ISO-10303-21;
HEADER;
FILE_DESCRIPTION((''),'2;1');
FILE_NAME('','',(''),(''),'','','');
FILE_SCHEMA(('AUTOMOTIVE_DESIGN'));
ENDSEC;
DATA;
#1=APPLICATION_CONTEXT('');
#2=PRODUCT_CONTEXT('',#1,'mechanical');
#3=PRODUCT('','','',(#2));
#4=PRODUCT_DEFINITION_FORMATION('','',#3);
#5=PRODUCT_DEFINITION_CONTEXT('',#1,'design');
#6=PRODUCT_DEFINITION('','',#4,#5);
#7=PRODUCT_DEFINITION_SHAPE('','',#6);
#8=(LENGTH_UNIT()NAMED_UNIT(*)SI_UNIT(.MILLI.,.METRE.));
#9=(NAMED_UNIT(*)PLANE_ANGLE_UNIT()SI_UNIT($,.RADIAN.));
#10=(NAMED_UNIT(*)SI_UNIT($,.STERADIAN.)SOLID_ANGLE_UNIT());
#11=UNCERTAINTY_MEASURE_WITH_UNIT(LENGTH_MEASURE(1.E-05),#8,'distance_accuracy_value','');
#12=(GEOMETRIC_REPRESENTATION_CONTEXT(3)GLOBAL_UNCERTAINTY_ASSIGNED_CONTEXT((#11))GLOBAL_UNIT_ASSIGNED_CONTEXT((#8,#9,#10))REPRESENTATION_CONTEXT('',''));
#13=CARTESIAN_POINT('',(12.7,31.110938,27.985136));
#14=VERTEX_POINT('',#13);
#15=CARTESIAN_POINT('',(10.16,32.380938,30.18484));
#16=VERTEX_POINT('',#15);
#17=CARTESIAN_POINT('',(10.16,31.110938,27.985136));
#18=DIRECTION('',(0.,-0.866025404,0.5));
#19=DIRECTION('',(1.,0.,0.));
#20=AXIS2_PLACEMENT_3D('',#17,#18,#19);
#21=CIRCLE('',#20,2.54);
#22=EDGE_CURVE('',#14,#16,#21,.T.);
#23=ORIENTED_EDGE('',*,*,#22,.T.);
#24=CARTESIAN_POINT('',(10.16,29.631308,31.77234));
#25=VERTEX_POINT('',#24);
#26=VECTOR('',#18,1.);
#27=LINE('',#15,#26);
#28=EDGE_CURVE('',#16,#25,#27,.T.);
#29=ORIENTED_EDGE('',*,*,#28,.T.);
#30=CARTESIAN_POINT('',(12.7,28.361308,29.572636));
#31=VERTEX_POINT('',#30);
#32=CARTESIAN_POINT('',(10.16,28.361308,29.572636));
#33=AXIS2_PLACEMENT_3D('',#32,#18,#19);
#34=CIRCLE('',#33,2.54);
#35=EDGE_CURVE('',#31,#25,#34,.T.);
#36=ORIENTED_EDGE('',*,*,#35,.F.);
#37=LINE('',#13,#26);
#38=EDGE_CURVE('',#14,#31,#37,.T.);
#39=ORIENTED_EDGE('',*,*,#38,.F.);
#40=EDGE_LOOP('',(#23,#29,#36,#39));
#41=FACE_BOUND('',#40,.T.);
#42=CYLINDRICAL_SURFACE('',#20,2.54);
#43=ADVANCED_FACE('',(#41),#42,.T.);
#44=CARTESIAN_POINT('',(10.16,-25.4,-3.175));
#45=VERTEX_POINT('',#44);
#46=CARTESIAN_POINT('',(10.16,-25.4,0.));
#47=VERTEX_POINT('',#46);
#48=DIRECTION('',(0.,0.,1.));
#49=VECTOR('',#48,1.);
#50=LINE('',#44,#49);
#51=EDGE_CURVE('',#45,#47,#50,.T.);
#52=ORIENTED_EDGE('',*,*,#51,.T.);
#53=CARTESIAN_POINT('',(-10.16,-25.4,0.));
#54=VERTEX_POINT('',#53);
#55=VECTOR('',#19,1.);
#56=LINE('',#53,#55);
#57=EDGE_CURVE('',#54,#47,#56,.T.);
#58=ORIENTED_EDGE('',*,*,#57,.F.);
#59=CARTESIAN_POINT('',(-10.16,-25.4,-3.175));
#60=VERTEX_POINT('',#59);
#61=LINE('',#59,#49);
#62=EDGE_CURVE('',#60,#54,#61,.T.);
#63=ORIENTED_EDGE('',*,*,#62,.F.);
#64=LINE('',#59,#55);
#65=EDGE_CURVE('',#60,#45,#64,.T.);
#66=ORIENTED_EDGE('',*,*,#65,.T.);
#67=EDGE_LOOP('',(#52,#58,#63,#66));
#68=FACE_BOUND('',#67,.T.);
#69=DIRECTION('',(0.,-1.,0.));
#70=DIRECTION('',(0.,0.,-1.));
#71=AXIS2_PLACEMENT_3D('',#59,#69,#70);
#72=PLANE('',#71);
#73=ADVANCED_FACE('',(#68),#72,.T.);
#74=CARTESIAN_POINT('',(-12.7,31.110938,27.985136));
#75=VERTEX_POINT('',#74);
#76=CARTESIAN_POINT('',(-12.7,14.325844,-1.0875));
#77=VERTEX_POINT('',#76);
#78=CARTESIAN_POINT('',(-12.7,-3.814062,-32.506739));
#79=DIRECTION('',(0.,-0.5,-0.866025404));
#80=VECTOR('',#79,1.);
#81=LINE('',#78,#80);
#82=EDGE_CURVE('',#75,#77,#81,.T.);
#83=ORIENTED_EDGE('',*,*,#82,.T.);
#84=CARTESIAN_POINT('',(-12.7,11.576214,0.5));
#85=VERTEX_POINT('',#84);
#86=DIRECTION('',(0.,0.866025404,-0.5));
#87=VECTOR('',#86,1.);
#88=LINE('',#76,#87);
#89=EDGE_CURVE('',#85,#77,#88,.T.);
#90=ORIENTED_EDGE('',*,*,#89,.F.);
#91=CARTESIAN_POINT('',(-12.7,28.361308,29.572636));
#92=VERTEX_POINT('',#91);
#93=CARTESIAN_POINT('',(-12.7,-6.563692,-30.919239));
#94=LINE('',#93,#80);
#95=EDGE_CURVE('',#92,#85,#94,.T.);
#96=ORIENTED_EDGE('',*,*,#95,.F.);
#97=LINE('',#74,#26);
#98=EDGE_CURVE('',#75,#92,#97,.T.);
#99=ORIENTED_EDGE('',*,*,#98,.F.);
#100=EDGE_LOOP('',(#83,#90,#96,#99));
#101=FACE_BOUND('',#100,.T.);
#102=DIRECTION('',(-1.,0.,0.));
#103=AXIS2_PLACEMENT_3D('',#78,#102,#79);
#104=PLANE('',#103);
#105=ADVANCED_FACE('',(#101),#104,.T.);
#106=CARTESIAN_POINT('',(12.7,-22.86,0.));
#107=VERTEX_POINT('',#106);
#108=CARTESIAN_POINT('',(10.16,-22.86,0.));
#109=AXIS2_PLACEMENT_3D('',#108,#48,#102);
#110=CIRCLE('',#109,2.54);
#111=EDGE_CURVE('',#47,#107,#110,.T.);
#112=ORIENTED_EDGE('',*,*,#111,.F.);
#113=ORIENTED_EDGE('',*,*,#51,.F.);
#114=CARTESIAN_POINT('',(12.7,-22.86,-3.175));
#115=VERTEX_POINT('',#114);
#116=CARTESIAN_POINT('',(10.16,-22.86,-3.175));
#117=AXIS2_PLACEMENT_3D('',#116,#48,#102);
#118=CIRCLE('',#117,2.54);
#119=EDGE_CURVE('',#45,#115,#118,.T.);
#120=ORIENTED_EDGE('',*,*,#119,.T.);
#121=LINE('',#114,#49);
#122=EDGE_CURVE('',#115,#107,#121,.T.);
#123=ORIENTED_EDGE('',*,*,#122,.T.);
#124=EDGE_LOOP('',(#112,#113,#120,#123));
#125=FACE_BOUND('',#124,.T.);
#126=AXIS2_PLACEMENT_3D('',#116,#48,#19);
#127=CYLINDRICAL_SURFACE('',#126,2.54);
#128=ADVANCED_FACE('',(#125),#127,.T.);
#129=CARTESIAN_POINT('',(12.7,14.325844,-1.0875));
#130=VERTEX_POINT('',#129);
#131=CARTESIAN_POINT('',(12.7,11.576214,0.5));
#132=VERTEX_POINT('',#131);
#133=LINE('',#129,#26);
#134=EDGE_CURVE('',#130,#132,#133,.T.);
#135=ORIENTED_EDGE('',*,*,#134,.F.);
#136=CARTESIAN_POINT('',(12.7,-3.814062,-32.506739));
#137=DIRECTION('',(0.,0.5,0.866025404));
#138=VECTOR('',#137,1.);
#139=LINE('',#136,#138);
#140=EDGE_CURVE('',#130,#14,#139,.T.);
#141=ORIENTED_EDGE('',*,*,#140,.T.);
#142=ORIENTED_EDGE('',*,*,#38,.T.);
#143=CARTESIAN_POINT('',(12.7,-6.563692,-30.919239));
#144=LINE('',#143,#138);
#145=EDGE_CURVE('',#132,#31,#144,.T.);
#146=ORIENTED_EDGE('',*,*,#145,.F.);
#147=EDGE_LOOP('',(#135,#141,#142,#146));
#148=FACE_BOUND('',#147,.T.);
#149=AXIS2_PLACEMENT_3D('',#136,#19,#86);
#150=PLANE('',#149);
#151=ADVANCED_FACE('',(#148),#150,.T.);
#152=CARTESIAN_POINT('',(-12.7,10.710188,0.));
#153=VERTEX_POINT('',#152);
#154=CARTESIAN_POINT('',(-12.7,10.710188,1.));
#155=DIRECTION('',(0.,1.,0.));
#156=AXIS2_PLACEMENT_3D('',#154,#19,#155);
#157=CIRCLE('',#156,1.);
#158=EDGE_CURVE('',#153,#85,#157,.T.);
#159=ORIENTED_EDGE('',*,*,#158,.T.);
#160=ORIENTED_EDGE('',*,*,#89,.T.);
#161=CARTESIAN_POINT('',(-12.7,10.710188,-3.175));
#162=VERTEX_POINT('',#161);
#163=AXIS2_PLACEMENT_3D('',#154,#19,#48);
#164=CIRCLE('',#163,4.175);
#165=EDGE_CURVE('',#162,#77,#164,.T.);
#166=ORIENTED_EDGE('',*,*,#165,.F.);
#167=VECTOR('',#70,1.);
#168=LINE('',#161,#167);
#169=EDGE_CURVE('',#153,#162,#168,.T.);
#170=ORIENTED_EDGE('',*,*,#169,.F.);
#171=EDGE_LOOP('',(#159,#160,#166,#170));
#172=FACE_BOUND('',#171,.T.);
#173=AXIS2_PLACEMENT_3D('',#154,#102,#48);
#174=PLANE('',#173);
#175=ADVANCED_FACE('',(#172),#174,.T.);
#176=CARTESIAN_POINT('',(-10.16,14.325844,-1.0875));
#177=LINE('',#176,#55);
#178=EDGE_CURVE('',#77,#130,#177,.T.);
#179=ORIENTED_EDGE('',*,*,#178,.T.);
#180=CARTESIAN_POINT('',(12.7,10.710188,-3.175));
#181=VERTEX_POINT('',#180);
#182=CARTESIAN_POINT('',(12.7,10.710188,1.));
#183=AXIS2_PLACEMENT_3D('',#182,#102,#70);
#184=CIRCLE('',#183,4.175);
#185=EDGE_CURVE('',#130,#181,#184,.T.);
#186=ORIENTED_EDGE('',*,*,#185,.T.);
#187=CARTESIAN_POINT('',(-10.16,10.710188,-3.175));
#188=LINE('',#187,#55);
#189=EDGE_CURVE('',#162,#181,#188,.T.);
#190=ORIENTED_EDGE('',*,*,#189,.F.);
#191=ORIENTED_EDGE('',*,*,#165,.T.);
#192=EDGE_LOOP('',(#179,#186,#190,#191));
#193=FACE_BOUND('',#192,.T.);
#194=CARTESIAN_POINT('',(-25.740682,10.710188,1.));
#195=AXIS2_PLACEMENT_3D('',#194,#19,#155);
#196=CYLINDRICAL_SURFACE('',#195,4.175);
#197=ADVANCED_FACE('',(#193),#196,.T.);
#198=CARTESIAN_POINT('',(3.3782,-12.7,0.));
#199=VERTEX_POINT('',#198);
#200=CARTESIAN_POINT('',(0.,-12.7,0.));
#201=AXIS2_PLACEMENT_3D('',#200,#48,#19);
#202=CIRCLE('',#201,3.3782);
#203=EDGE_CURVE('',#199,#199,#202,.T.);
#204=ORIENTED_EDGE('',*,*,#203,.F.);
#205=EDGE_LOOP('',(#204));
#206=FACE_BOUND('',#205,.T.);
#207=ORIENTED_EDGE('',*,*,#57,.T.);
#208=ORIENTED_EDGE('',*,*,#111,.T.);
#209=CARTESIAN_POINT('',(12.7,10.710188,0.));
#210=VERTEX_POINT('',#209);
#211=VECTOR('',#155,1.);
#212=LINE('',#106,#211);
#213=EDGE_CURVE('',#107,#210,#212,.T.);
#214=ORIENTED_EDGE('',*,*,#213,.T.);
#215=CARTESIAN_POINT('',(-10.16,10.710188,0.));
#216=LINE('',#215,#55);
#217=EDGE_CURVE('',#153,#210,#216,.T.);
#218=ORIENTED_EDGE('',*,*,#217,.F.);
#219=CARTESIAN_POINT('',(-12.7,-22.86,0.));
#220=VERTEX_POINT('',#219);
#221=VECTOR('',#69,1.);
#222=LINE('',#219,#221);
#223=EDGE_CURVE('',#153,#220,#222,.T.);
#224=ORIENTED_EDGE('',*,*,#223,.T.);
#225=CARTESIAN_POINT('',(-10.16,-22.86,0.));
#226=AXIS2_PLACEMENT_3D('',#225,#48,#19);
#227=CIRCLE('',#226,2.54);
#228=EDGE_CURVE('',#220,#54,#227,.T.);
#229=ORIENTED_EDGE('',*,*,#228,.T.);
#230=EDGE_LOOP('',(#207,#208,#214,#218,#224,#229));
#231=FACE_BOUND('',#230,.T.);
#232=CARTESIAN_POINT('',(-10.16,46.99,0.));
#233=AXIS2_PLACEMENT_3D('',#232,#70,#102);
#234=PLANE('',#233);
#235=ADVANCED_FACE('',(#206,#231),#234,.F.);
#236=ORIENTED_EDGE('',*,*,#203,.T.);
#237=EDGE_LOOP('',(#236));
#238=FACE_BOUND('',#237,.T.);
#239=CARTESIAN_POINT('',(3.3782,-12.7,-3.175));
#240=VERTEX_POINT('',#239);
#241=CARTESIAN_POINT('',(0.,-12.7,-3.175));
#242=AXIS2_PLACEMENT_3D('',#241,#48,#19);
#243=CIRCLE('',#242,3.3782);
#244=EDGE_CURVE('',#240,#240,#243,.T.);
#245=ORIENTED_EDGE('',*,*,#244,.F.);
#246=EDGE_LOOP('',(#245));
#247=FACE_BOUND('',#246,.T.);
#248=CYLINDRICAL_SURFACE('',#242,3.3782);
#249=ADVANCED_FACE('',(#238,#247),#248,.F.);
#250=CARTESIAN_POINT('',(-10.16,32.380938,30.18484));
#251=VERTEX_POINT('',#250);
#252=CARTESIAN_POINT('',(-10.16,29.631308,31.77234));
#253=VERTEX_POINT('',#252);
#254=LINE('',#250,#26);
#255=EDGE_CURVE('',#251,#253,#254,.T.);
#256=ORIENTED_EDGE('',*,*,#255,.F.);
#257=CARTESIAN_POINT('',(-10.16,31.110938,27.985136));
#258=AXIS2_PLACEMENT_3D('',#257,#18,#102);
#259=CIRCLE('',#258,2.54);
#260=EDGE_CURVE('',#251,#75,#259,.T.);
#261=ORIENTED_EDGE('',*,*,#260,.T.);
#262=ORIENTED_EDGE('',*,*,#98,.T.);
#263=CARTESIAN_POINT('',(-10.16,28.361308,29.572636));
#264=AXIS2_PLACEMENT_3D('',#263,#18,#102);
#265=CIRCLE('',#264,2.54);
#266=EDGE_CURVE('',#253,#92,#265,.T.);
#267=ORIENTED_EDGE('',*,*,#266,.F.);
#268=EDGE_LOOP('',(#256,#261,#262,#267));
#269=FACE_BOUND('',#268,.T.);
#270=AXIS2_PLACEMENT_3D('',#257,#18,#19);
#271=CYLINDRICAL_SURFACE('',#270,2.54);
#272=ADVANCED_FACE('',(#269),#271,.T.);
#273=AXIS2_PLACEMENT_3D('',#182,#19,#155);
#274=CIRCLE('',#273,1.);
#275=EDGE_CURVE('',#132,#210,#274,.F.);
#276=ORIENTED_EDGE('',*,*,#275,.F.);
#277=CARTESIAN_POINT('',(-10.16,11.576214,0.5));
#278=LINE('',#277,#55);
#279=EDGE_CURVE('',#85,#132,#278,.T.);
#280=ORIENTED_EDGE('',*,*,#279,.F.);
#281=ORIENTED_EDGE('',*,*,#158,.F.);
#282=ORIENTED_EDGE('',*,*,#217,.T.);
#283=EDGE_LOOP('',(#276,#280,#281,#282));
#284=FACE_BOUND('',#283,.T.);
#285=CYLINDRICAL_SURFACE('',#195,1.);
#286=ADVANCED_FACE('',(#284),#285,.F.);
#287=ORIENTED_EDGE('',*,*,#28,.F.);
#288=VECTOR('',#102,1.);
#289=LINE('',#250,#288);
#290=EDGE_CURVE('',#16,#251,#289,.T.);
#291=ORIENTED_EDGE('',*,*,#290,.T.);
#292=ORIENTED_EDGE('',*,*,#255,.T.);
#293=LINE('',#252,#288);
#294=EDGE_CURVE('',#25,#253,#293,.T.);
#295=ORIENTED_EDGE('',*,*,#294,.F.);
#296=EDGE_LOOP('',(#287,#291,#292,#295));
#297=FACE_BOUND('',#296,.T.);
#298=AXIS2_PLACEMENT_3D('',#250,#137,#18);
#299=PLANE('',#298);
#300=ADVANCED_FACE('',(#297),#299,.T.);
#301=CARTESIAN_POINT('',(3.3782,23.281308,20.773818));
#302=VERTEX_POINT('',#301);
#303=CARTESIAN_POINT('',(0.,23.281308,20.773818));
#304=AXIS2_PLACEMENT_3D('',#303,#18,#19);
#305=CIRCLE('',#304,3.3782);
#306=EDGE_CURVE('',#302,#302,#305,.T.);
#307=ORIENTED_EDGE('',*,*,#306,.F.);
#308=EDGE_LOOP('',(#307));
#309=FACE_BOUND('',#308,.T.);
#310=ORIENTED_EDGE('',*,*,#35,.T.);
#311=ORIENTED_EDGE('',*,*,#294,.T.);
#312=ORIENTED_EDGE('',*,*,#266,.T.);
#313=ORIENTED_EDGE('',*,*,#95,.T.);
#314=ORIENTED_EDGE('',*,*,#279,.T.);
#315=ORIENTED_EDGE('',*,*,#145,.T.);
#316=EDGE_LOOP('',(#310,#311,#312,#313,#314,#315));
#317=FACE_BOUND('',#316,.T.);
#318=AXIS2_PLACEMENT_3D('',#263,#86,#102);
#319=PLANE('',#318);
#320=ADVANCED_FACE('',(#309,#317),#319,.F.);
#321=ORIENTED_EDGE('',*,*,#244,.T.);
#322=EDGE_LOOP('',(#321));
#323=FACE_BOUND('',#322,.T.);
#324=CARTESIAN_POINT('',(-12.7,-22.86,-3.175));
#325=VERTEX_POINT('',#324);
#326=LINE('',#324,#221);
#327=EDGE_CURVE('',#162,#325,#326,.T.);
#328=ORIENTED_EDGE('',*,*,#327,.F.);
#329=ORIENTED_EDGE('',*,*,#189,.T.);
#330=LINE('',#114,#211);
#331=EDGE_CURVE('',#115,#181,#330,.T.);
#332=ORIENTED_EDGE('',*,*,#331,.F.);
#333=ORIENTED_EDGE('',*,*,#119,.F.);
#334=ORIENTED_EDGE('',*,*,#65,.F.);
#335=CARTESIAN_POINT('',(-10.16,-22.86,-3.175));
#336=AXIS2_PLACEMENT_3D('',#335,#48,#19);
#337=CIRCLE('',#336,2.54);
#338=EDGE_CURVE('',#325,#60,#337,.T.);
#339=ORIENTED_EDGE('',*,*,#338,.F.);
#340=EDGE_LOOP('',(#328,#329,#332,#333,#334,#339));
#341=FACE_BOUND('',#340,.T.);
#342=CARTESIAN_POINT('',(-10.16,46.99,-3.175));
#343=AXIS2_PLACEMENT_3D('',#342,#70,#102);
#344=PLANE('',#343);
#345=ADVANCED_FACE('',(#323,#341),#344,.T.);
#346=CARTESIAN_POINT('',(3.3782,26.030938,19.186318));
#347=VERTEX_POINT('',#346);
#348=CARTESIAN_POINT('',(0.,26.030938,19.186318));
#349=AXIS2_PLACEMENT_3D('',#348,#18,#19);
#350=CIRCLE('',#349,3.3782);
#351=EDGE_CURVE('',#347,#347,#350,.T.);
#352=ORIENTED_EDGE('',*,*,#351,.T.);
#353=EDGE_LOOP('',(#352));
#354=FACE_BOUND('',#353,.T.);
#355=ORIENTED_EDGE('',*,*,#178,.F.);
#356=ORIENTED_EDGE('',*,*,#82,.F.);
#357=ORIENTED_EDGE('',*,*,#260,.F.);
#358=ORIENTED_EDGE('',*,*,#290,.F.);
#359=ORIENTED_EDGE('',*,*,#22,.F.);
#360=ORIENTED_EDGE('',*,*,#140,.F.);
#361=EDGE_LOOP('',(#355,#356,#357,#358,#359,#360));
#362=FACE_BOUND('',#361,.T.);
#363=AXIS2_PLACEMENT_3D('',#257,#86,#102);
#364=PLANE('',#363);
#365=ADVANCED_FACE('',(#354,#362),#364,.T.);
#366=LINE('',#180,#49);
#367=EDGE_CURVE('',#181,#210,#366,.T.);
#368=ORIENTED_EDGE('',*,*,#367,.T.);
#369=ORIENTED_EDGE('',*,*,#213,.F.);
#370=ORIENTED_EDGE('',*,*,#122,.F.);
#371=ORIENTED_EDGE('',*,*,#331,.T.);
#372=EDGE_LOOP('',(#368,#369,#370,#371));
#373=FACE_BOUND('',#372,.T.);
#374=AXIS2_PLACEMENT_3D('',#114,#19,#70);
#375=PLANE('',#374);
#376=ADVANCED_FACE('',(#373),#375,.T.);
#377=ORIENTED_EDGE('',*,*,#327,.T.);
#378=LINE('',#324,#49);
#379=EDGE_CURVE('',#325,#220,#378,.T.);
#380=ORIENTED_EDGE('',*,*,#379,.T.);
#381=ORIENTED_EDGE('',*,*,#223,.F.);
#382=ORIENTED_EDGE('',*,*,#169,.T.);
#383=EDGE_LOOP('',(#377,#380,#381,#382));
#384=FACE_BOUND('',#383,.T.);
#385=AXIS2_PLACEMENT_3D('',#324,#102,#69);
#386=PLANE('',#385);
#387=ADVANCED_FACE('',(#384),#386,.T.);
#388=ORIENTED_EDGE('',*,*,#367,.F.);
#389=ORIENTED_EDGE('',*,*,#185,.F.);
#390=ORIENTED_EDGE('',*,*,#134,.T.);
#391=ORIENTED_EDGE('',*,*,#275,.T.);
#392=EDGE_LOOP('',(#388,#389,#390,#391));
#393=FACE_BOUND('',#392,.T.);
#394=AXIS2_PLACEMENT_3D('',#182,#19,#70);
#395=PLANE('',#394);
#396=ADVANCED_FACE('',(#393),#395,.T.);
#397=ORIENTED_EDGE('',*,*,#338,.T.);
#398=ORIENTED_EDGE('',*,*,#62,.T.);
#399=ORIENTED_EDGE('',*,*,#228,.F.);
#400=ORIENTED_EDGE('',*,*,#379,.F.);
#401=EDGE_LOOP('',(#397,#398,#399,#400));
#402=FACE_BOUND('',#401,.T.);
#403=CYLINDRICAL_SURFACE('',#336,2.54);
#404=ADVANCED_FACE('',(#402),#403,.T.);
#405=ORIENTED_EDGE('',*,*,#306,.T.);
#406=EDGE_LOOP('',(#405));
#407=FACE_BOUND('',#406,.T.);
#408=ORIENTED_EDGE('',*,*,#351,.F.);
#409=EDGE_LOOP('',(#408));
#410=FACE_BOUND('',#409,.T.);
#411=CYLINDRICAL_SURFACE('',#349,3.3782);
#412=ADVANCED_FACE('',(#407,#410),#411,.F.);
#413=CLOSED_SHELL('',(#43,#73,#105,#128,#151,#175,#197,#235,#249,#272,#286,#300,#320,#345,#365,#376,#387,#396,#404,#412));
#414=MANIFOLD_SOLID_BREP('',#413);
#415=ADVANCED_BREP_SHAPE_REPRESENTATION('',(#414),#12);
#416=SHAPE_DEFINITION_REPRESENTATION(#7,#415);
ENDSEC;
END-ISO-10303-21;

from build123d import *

# Parameters (mm, degrees)
SKETCH1_R                  = 3.3782
BASE_FLANGE1_DEPTH         = 3.175
SKETCHED_START             = -12.7
SKETCHED_BEND1_DEPTH       = 25.4
SKETCHED_START_2           = -10.229596
SKETCHED_BEND1_2_DEPTH     = 6.8513959
SKETCHED_START_3           = 3.3782001
SKETCHED_BEND1_3_DEPTH     = 6.7817999
SKETCHED_BEND1_4_DEPTH     = 25.4
SKETCHED_START_4           = 9.775295033
SKETCHED_BEND1_5_OUTLINE_R = 3.3782
SKETCHED_BEND1_5_DEPTH     = 3.175


with BuildPart() as part:
    # Base-Flange1: sheet metal written as solids
    # Sketch1 → Base-Flange1 (new body)
    with BuildSketch(Plane.XY):
        with BuildLine():
            Line((-10.16, -25.4), (10.16, -25.4))
            ThreePointArc((10.16, -25.4), (11.956051224, -24.656051224), (12.7, -22.86))
            Line((12.7, -22.86), (12.7, 46.99))
            ThreePointArc((12.7, 46.99), (11.956051224, 48.786051224), (10.16, 49.53))
            Line((10.16, 49.53), (-10.16, 49.53))
            ThreePointArc((-10.16, 49.53), (-11.956051224, 48.786051224), (-12.7, 46.99))
            Line((-12.7, 46.99), (-12.7, -22.86))
            ThreePointArc((-12.7, -22.86), (-11.956051224, -24.656051224), (-10.16, -25.4))
        make_face()
        with Locations((0, 36.83)):
            Circle(SKETCH1_R, mode=Mode.SUBTRACT)
        with Locations((0, -12.7)):
            Circle(SKETCH1_R, mode=Mode.SUBTRACT)
    extrude(amount=-BASE_FLANGE1_DEPTH)

    # Sketched Bend1: read off the stored shape, not the designer's step
    # Sketched Bend1 outline → Sketched Bend1 (cut)
    with BuildSketch(Plane.YZ.offset(SKETCHED_START)):
        with BuildLine():
            Line((49.53, 0), (14.953712647, 0))
            Line((14.953712647, 0), (14.325844229, -1.0875))
            ThreePointArc((14.325844229, -1.0875), (12.797688168, -2.615656061), (10.710188168, -3.175))
            Line((10.710188168, -3.175), (49.53, -3.175))
            Line((49.53, -3.175), (49.53, 0))
        make_face()
    extrude(amount=SKETCHED_BEND1_DEPTH, mode=Mode.SUBTRACT)

    # Sketched Bend1 2 outline → Sketched Bend1 2 (add)
    with BuildSketch(Plane.YZ.offset(SKETCHED_START_2)):
        with BuildLine():
            Line((29.631307656, 31.772340289), (11.576213572, 0.5))
            ThreePointArc((11.576213572, 0.5), (11.210188168, 0.133974596), (10.710188168, 0))
            Line((10.710188168, 0), (14.953712647, 0))
            Line((14.953712647, 0), (32.380938313, 30.184840289))
            Line((32.380938313, 30.184840289), (29.631307656, 31.772340289))
        make_face()
    extrude(amount=SKETCHED_BEND1_2_DEPTH)

    # Sketched Bend1 3 outline → Sketched Bend1 3 (add)
    with BuildSketch(Plane.YZ.offset(SKETCHED_START_3)):
        with BuildLine():
            Line((29.631307656, 31.772340289), (11.576213572, 0.5))
            ThreePointArc((11.576213572, 0.5), (11.210188168, 0.133974596), (10.710188168, 0))
            Line((10.710188168, 0), (14.953712647, 0))
            Line((14.953712647, 0), (32.380938313, 30.184840289))
            Line((32.380938313, 30.184840289), (29.631307656, 31.772340289))
        make_face()
    extrude(amount=SKETCHED_BEND1_3_DEPTH)

    # Sketched Bend1 4 outline → Sketched Bend1 4 (add)
    with BuildSketch(Plane.YZ.offset(SKETCHED_START)):
        with BuildLine():
            Line((29.631307656, 31.772340289), (11.576213572, 0.5))
            ThreePointArc((11.576213572, 0.5), (11.210188168, 0.133974596), (10.710188168, 0))
            Line((10.710188168, 0), (14.953712647, 0))
            Line((14.953712647, 0), (32.380938313, 30.184840289))
            Line((32.380938313, 30.184840289), (29.631307656, 31.772340289))
        make_face()
    extrude(amount=SKETCHED_BEND1_4_DEPTH)

    # Sketched Bend1 5 outline → Sketched Bend1 5 (cut)
    with BuildSketch(Plane(origin=(0, 0, 0), x_dir=(1, 0, 0), z_dir=(0, 0.8660254037844399, -0.49999999999999795)).offset(SKETCHED_START_4)):
        with BuildLine():
            Line((-12.7, -42.331307656), (-10.16, -42.331307656))
            ThreePointArc((-10.16, -42.331307656), (-11.956051224, -41.58735888), (-12.7, -39.791307656))
            Line((-12.7, -39.791307656), (-12.7, -42.331307656))
        make_face()
        with BuildLine():
            ThreePointArc((12.7, -39.791307656), (11.956051224, -41.58735888), (10.16, -42.331307656))
            Line((10.16, -42.331307656), (12.7, -42.331307656))
            Line((12.7, -42.331307656), (12.7, -39.791307656))
        make_face()
        with Locations((0, -29.631307656)):
            Circle(SKETCHED_BEND1_5_OUTLINE_R)
    extrude(amount=SKETCHED_BEND1_5_DEPTH, mode=Mode.SUBTRACT)


solid = part.part
